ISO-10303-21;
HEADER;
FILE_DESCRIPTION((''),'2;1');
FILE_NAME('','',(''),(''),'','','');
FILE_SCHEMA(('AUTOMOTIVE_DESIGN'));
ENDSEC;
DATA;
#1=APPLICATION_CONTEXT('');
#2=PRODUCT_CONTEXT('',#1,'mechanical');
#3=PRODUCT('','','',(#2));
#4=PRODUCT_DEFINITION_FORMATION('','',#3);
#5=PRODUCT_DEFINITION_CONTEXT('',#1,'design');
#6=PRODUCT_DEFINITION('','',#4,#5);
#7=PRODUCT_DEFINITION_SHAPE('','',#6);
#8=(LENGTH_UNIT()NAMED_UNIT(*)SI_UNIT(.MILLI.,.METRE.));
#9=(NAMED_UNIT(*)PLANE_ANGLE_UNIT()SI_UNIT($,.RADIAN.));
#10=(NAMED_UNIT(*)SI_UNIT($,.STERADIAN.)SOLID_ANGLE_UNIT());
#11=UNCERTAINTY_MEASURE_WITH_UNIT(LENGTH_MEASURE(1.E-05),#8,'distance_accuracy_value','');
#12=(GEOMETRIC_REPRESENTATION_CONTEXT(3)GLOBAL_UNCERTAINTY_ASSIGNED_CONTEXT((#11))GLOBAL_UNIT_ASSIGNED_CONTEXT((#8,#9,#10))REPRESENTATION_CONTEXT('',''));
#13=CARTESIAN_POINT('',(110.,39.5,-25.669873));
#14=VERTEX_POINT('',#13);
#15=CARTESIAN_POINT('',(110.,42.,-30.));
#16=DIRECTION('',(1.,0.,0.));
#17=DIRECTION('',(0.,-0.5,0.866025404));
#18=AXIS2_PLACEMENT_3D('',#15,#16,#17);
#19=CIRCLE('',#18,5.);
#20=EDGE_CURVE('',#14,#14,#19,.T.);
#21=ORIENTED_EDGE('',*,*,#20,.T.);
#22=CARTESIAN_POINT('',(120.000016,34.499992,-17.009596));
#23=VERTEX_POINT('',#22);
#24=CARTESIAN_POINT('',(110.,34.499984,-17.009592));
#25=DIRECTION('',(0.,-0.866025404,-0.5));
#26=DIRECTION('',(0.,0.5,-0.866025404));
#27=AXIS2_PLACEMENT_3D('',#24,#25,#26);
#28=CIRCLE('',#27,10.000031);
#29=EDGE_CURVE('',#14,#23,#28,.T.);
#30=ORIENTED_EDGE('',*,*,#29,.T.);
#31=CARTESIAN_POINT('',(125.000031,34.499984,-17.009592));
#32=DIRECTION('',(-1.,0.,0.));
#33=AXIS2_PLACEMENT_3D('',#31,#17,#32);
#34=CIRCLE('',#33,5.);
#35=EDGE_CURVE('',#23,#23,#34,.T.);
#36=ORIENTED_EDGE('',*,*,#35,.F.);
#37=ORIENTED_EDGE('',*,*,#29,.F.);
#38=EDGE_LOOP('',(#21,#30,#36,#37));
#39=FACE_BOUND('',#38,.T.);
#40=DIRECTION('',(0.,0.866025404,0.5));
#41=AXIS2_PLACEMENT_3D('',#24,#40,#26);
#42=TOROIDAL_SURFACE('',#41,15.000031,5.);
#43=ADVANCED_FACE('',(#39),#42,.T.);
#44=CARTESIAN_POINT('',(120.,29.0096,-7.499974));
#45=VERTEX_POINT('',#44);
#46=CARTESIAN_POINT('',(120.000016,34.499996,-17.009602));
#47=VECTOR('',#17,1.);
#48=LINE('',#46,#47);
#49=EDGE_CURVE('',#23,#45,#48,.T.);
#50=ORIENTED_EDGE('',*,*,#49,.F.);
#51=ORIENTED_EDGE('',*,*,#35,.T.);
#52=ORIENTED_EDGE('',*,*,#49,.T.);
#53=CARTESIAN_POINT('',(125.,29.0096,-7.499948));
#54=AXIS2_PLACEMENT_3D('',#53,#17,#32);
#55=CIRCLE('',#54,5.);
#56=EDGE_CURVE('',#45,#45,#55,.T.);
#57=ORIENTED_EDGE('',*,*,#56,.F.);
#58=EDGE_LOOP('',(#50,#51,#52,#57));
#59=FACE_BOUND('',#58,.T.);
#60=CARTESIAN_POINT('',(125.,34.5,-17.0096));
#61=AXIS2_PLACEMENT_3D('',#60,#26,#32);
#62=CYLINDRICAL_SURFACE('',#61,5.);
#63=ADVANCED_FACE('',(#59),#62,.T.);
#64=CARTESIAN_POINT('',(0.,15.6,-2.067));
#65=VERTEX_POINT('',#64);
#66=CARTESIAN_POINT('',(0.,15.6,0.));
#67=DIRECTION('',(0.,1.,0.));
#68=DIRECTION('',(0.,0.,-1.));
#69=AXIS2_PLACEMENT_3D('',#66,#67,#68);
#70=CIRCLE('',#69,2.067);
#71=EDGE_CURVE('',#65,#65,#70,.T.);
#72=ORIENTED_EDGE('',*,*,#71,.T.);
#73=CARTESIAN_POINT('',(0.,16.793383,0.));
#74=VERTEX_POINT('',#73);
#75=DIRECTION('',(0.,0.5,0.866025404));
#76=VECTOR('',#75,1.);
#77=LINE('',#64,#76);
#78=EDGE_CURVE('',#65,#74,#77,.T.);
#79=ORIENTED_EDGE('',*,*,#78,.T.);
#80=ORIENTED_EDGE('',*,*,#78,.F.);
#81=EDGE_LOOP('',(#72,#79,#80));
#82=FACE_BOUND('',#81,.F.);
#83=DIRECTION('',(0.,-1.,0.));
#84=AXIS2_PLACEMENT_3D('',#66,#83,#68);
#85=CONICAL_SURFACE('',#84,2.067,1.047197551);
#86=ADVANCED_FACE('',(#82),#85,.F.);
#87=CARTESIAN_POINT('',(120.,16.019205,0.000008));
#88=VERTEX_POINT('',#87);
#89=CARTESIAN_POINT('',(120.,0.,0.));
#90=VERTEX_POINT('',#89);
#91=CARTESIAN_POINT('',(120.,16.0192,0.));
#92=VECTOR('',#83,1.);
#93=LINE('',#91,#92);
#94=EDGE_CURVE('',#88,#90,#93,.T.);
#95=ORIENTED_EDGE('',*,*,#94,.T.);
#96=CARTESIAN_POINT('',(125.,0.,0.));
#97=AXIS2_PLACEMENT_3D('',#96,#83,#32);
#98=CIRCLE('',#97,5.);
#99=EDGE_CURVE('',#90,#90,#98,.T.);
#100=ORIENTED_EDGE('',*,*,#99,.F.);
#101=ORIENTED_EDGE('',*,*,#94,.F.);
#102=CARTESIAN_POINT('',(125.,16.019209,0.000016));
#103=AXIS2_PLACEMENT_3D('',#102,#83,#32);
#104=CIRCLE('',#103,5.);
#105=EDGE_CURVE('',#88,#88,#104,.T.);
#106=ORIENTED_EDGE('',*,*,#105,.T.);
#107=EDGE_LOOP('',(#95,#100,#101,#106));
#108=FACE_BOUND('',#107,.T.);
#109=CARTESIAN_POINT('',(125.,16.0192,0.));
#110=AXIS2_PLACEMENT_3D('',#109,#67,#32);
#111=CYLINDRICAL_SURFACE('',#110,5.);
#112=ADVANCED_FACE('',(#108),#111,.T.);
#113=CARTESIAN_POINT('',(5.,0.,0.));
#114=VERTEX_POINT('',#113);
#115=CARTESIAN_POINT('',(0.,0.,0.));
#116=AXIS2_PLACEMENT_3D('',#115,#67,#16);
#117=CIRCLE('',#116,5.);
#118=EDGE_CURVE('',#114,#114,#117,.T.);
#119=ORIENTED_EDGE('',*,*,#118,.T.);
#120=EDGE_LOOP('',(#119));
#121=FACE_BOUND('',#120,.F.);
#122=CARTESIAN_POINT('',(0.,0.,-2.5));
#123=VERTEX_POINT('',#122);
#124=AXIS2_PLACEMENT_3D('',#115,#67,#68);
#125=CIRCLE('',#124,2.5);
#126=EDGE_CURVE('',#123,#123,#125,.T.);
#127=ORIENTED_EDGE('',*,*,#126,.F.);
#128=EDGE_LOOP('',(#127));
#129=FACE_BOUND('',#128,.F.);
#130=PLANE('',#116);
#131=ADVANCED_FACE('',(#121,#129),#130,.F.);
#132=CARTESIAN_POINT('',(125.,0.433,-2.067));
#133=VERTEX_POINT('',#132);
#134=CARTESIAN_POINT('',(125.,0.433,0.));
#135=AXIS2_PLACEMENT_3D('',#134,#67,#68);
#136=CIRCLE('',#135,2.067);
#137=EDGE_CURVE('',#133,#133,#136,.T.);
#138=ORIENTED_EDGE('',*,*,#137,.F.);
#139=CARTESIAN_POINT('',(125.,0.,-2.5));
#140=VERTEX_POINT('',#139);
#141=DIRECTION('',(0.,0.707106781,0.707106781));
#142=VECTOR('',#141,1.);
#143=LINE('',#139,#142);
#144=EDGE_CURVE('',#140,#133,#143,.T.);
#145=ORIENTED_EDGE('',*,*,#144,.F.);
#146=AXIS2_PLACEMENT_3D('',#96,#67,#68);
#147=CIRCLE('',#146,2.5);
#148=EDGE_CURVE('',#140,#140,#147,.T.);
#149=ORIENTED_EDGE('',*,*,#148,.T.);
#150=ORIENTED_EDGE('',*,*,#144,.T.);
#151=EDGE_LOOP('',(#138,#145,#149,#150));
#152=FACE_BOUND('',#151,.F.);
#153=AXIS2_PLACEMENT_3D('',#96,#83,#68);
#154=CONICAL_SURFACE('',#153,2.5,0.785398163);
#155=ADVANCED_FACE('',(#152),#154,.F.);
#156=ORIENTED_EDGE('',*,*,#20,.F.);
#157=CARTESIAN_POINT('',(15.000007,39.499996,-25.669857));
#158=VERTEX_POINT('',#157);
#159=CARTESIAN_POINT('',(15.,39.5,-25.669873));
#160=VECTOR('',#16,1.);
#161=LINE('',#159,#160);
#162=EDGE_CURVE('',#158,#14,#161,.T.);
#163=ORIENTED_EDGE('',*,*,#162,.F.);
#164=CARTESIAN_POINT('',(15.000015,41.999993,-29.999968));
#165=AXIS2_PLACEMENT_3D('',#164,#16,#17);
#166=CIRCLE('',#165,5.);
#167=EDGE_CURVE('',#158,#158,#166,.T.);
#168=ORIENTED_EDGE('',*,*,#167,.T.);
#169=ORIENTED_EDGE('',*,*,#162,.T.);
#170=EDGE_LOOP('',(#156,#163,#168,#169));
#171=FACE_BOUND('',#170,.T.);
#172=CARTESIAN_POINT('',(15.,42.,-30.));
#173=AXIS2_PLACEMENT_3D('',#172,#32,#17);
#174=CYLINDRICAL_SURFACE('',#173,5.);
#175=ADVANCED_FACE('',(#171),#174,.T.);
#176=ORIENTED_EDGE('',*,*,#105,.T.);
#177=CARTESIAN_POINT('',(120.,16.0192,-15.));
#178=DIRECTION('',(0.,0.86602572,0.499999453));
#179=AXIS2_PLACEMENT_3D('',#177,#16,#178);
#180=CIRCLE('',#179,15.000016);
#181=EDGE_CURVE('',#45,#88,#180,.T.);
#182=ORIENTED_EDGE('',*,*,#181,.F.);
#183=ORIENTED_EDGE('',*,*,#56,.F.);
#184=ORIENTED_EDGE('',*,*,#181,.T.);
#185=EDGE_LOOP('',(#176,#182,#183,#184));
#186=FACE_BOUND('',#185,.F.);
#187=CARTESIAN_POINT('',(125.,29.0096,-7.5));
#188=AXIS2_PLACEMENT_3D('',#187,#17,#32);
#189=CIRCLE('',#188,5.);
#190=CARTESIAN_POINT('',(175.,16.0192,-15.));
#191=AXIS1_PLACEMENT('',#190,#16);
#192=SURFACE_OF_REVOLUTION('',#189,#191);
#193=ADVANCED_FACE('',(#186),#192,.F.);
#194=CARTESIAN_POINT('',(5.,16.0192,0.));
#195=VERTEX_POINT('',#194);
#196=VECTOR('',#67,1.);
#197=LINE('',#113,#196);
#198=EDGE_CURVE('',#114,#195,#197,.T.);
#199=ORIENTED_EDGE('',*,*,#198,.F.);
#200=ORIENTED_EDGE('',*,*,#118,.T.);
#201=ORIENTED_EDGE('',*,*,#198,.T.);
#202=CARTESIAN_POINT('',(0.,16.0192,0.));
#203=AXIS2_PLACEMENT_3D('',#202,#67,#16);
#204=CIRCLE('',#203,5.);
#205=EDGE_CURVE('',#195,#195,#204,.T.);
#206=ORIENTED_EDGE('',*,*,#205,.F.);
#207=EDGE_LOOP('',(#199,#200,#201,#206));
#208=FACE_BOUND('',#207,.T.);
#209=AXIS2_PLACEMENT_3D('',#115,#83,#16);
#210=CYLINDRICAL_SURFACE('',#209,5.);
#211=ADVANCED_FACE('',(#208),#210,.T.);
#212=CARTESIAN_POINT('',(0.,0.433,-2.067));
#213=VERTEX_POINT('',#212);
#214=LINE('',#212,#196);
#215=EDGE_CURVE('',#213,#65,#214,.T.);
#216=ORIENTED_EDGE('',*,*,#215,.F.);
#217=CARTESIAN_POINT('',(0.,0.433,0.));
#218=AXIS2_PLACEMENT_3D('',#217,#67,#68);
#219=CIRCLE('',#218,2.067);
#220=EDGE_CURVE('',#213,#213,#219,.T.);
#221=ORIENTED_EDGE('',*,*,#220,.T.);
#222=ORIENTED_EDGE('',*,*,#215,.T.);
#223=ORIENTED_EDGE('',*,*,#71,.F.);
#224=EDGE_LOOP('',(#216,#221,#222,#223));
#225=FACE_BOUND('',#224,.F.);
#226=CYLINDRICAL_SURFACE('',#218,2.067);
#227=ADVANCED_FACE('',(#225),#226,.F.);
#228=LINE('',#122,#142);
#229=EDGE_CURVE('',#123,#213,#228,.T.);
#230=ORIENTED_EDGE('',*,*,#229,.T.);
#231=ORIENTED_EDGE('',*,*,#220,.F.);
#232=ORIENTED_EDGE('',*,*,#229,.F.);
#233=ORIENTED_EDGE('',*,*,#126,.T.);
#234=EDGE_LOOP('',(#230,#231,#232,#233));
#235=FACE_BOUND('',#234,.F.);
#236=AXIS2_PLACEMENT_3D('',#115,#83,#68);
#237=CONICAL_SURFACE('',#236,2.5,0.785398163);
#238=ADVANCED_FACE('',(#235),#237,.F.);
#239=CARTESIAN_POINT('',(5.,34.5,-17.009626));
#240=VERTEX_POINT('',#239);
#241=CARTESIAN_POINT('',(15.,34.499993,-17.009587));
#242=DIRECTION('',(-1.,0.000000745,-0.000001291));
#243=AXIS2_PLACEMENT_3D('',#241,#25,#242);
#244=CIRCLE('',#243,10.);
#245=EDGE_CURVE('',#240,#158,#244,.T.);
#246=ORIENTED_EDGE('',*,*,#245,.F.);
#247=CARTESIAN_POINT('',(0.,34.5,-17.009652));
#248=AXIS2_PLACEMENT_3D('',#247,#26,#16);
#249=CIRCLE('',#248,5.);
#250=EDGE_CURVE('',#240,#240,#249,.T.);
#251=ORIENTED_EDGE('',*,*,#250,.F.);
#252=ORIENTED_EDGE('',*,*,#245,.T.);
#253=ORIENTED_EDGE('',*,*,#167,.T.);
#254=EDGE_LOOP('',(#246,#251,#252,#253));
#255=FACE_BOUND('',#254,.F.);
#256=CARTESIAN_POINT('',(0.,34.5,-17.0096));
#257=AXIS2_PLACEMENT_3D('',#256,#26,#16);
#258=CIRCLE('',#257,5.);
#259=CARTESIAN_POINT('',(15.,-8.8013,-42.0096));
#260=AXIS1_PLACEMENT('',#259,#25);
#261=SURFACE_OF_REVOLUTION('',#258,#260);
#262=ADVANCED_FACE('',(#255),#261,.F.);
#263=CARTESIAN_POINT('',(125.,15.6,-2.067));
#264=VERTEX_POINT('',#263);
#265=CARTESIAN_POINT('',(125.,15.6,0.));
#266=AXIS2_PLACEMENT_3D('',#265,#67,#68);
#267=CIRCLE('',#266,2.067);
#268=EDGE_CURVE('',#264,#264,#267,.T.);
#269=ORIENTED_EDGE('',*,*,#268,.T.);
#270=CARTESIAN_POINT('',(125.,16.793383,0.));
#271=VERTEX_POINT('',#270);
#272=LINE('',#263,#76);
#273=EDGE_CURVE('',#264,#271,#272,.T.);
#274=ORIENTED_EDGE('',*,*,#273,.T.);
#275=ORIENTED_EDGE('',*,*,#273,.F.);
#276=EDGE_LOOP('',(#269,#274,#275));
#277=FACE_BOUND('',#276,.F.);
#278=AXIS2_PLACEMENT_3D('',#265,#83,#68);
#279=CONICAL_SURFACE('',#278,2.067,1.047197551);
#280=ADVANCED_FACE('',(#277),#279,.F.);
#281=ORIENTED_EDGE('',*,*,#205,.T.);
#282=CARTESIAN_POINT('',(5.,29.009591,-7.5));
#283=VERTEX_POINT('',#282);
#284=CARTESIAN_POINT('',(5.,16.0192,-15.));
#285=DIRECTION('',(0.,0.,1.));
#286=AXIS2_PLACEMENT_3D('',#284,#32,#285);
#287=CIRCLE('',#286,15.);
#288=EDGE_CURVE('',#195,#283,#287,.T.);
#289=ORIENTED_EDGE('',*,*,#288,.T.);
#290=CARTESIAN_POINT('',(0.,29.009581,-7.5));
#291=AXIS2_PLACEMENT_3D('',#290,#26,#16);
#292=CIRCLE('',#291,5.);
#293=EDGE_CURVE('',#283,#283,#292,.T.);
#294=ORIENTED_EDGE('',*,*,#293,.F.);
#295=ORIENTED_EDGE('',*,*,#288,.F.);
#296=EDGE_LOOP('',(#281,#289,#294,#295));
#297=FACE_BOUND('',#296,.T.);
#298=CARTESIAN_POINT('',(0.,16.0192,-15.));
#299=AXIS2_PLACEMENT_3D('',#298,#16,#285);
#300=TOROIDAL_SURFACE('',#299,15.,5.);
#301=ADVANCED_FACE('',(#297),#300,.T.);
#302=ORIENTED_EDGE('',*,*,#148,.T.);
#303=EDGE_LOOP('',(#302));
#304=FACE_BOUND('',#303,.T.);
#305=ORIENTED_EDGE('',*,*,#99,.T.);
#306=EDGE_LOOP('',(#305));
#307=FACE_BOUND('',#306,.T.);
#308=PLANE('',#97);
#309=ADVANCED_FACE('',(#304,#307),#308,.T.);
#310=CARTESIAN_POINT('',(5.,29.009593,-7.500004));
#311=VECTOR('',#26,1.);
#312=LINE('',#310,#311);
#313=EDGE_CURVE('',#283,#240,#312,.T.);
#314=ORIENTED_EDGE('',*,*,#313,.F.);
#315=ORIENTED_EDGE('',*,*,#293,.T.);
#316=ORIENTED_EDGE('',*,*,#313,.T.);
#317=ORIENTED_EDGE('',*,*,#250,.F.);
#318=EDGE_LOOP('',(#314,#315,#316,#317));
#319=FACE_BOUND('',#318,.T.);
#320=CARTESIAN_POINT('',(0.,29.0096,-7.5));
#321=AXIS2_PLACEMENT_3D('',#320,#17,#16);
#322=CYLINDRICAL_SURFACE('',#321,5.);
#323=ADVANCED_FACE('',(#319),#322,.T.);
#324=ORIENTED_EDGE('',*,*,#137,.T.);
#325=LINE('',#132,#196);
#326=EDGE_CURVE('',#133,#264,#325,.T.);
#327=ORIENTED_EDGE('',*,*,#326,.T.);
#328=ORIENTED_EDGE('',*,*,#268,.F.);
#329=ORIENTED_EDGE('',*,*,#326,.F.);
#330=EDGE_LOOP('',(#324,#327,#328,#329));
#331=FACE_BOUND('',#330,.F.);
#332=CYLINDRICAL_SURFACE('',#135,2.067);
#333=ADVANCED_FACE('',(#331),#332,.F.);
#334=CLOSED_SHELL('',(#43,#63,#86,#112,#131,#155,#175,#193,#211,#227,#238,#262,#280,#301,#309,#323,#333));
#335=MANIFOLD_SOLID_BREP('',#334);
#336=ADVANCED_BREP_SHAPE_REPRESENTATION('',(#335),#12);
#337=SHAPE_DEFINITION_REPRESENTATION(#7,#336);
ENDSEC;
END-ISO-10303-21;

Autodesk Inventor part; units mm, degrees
sketch "_____1" plane through (0, 0, 0) normal (0, 1, 0) x (1, 0, 0)
  circle A0 centre (0, 0) radius 5
extrude "Extrusion1" add sketch "_____1" along normal blind 16.0192
sketch "_____2" plane through (0, 16.0192, 0) normal (0, 1, 0) x (1, 0, 0)
  line L0 (-50, 15) -> (50, 15)
  circle A0 centre (0, 0) radius 5
revolve "Revolution1" add sketch "_____2" angle 60 about axis through (-50, 16.0192, -15) along (-1, 0, 0)
sketch "_____3" plane through (0, 29.0096, -7.5) normal (0, 0.5, -0.8660254) x (1, 0, 0)
  circle A0 centre (0, 0) radius 5
extrude "Extrusion2" add sketch "_____3" along normal blind 10.9808
sketch "_____4" plane through (0, 34.5, -17.0096) normal (0, 0.5, -0.8660254) x (1, 0, 0)
  line L0 (15, 50) -> (15, -50)
  circle A0 centre (0, 0) radius 5
revolve "Revolution2" add sketch "_____4" angle 90 about axis through (15, -8.8013, -42.0096) along (0, -0.8660254, -0.5)
sketch "_____5" plane through (15, 42, -30) normal (1, 0, 0) x (0, -0.5, 0.8660254)
  circle A0 centre (0, 0) radius 5
extrude "Extrusion3" add sketch "_____5" along normal blind 95
sketch "_____6" plane through (110, 42, -30) normal (1, 0, 0) x (0, -0.5, 0.8660254)
  line L0 (15, 50) -> (15, -50)
  circle A0 centre (0, 0) radius 5
revolve "Revolution3" add sketch "_____6" angle 90 about axis through (110, -8.8013, -42.0096) along (0, -0.8660254, -0.5)
sketch "_____7" plane through (125, 34.5, -17.0096) normal (0, -0.5, 0.8660254) x (-1, 0, 0)
  circle A0 centre (0, 0) radius 5
extrude "Extrusion4" add sketch "_____7" along normal blind 10.9808
sketch "_____8" plane through (125, 29.0096, -7.5) normal (0, -0.5, 0.8660254) x (-1, 0, 0)
  line L0 (-50, 15) -> (50, 15)
  circle A0 centre (0, 0) radius 5
revolve "Revolution4" add sketch "_____8" angle 60 about axis through (175, 16.0192, -15) along (1, 0, 0)
sketch "_____9" plane through (125, 16.0192, 0) normal (0, -1, 0) x (-1, 0, 0)
  circle A0 centre (0, 0) radius 5
extrude "Extrusion5" add sketch "_____9" along normal blind 16.0192
sketch "Sketch10" plane through (0, 0, 0) normal (0, -1, 0) x (1, 0, 0)
  point P0 (0, 0)
hole "Hole1" at (0, 0, 0) direction (0, 1, 0) diameter 4.134 depth 15.6 tip angle 120 countersink diameter 5 countersink angle 90 thread size "M5x0.8" class "6H" standard "ISO Metric profile"
sketch "Sketch11" plane through (125, 0, 0) normal (0, -1, 0) x (1, 0, 0)
  point P0 (0, 0)
hole "Hole2" at (125, 0, 0) direction (0, 1, 0) diameter 4.134 depth 15.6 tip angle 120 countersink diameter 5 countersink angle 90 thread size "M5x0.8" class "6H" standard "ISO Metric profile"
ref_plane "H1_XY" through (0, 0, 0) normal (0, 1, 0) x (1, 0, 0)
ref_plane "H1_YZ" through (0, 0, 0) normal (1, 0, 0) x (0, 0, -1)
ref_plane "H1_ZX" through (0, 0, 0) normal (0, 0, -1) x (0, 1, 0)
ref_plane "H2_XY" through (125, 0, 0) normal (0, 1, 0) x (1, 0, 0)
ref_plane "H2_YZ" through (125, 0, 0) normal (1, 0, 0) x (0, 0, -1)
ref_plane "H2_ZX" through (125, 0, 0) normal (0, 0, -1) x (0, 1, 0)
properties part number "UHFNB125" material "Aluminum 2014-T4"
